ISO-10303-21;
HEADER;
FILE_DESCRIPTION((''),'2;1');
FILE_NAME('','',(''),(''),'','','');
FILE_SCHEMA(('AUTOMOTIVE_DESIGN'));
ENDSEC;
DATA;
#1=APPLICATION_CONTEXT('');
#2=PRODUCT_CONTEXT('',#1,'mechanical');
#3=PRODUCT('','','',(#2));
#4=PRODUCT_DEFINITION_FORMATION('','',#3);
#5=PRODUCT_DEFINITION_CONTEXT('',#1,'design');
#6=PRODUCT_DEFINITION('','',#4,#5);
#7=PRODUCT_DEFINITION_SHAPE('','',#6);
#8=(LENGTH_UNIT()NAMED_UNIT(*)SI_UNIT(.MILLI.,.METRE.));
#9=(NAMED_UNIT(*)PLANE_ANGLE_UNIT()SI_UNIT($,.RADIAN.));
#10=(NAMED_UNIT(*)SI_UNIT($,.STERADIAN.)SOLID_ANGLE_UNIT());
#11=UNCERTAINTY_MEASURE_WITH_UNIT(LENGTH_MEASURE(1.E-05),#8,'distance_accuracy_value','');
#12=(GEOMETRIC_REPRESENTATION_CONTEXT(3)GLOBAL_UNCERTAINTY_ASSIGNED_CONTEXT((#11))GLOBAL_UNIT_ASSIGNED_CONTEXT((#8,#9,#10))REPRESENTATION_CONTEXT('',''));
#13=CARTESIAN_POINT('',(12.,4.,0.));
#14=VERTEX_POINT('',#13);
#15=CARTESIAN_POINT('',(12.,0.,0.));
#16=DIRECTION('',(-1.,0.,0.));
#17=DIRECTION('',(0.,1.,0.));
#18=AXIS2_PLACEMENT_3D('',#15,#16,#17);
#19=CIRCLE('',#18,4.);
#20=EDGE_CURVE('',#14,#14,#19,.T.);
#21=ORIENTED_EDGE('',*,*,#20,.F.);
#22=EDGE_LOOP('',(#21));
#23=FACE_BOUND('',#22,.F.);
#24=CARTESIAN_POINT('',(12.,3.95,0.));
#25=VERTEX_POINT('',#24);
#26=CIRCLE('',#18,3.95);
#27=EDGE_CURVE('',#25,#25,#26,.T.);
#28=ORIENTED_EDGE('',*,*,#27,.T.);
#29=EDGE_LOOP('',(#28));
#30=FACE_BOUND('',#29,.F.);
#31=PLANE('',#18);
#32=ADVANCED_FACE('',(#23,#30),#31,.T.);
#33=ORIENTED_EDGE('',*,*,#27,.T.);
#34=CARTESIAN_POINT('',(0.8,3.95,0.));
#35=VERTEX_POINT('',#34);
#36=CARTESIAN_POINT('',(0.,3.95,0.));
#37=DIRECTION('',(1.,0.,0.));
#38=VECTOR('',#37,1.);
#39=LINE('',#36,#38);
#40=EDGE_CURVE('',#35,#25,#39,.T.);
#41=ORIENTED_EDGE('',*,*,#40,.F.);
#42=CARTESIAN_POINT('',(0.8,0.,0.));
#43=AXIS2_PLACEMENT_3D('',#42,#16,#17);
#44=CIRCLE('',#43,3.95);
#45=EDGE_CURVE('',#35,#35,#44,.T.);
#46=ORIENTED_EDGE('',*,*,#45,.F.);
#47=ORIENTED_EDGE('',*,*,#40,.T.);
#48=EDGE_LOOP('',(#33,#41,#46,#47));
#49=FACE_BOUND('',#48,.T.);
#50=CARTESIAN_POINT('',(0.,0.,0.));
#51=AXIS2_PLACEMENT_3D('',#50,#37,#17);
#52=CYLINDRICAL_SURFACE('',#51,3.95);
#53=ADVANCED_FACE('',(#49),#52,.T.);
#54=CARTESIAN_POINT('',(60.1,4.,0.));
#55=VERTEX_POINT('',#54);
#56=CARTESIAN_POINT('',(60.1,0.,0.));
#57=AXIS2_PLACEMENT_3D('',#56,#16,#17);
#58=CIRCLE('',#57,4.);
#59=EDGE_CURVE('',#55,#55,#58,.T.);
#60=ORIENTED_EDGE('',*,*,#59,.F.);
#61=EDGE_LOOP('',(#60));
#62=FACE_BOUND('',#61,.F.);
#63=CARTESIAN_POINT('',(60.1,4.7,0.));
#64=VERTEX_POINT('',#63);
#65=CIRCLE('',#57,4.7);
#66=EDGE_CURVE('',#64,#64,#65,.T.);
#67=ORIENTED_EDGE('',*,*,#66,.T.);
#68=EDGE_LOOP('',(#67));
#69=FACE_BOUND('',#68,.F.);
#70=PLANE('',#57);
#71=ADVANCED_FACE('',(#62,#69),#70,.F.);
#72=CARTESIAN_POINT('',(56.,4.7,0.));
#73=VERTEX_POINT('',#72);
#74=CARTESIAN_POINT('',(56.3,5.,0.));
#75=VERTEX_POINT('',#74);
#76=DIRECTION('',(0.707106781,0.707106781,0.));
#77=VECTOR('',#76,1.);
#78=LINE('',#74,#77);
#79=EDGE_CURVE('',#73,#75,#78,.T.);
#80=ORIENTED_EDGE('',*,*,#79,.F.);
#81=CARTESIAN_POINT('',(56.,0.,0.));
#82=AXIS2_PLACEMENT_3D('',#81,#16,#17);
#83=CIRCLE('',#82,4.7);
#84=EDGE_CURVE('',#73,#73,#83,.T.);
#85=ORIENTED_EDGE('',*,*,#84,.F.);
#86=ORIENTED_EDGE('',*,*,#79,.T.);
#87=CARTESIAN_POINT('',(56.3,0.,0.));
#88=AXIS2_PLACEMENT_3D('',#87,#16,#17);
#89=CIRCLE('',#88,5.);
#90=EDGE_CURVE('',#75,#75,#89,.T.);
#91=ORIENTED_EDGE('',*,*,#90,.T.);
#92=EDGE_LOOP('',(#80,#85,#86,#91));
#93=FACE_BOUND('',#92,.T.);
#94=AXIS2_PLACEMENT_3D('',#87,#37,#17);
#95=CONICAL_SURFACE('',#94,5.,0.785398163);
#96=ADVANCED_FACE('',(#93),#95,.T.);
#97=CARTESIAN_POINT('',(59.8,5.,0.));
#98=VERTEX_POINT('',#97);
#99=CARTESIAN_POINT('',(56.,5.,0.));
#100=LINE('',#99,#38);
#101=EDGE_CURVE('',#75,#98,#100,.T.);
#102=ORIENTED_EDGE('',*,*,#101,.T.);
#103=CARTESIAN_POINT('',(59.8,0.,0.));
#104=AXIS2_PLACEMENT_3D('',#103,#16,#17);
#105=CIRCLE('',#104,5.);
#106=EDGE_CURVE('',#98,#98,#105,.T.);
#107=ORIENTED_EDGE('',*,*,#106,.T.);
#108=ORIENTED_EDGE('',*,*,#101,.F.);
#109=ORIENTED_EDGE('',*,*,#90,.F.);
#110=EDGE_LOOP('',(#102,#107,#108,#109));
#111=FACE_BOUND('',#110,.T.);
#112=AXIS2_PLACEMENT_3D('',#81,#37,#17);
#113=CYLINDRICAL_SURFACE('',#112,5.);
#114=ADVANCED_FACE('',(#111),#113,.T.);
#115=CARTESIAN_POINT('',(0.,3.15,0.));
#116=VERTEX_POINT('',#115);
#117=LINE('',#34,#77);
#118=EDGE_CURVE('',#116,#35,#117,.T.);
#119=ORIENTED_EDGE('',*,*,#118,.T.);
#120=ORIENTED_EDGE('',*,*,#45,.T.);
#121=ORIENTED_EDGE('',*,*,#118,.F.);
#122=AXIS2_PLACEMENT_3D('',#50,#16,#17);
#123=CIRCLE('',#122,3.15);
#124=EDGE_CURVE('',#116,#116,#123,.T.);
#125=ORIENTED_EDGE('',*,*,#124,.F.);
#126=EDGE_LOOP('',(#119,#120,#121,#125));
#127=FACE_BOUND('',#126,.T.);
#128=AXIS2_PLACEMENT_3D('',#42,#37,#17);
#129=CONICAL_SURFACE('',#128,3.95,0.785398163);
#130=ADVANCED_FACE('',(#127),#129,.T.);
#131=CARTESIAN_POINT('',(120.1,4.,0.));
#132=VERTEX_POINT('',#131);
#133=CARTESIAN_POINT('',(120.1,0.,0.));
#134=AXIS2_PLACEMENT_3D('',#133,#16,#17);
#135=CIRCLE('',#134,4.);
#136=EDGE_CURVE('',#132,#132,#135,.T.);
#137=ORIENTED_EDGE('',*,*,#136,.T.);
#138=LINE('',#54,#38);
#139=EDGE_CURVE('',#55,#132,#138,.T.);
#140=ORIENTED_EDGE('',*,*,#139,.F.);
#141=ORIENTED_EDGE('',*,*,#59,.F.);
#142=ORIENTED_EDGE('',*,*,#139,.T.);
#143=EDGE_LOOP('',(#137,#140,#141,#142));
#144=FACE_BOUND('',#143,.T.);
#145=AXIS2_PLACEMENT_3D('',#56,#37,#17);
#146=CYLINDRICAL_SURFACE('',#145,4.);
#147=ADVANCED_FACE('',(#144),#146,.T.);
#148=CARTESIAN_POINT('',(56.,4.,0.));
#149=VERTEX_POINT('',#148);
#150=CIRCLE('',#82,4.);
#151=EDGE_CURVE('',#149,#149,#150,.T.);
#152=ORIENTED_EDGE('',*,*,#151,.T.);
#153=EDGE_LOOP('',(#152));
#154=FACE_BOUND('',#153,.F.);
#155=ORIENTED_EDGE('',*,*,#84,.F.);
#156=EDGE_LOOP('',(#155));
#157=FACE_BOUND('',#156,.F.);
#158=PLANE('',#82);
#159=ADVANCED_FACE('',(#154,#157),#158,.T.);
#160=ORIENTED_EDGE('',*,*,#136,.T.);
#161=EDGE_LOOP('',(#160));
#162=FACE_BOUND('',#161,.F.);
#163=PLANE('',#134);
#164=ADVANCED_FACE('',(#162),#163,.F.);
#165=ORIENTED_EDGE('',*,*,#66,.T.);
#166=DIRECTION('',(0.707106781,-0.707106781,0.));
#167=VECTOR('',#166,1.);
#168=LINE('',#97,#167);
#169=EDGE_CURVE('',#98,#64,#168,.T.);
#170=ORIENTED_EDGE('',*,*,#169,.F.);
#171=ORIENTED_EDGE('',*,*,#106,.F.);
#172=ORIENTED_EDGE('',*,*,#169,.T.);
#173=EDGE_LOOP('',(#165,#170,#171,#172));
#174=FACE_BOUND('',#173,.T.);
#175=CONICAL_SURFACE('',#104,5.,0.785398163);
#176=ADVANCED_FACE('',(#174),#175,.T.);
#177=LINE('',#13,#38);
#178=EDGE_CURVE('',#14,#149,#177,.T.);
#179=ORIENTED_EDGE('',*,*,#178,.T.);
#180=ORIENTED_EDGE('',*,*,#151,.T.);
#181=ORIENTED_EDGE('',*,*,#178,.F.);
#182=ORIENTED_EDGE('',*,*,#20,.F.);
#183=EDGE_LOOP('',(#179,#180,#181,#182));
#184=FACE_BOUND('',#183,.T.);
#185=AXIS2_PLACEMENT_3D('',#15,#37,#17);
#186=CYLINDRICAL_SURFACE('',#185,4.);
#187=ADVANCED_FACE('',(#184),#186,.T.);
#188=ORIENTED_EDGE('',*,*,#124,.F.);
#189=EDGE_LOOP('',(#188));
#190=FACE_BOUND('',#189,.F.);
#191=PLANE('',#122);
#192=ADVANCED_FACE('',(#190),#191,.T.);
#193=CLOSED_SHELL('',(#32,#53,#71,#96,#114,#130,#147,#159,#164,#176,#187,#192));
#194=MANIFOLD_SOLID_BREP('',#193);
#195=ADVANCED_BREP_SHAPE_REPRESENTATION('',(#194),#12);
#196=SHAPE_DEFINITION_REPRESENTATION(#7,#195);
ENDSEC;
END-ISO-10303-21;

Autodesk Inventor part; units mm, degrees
ref_plane "YZ Plane" through (0, 0, 0) normal (1, 0, 0) x (0, 1, 0)
ref_plane "XZ Plane" through (0, 0, 0) normal (0, 1, 0) x (-1, 0, 0)
ref_plane "XY Plane" through (0, 0, 0) normal (0, 0, 1) x (1, 0, 0)
sketch "Skizze1" plane through (0, 0, 0) normal (0, 0, 1) x (1, 0, 0)
  line L0 (0, 0) -> (0, 3.95)
  line L1 (0, 3.95) -> (12, 3.95)
  line L2 (12, 3.95) -> (12, 4)
  line L3 (12, 4) -> (56, 4)
  line L4 (56, 4) -> (56, 5)
  line L5 (56, 5) -> (60.1, 5)
  line L6 (60.1, 5) -> (60.1, 4)
  line L7 (60.1, 4) -> (120.1, 4)
  line L8 (120.1, 4) -> (120.1, 0)
  line L9 (120.1, 0) -> (0, 0)
  dimension "d0" = 3.95
  dimension "d1" = 12
  dimension "d3" = 4
  dimension "d6" = 44
  dimension "d8" = 48.1
  dimension "d9" = 5
  dimension "d10" = 60
revolve "Umdrehung1" add sketch "Skizze1" angle 360 about axis through (120.1, 0, 0) along (-1, 0, 0)
thread "Gewinde1" size "M8x1.25" class "6g" standard "ANSI Metric M Profile" full length
chamfer "Fase1" distance 0.8 angle 45 1 edges at (0, -3.95, 0)
chamfer "Fase2" distance 0.3 angle 45 2 edges at (56, -5, 0) (60.1, -5, 0)
properties part number "Welle"
